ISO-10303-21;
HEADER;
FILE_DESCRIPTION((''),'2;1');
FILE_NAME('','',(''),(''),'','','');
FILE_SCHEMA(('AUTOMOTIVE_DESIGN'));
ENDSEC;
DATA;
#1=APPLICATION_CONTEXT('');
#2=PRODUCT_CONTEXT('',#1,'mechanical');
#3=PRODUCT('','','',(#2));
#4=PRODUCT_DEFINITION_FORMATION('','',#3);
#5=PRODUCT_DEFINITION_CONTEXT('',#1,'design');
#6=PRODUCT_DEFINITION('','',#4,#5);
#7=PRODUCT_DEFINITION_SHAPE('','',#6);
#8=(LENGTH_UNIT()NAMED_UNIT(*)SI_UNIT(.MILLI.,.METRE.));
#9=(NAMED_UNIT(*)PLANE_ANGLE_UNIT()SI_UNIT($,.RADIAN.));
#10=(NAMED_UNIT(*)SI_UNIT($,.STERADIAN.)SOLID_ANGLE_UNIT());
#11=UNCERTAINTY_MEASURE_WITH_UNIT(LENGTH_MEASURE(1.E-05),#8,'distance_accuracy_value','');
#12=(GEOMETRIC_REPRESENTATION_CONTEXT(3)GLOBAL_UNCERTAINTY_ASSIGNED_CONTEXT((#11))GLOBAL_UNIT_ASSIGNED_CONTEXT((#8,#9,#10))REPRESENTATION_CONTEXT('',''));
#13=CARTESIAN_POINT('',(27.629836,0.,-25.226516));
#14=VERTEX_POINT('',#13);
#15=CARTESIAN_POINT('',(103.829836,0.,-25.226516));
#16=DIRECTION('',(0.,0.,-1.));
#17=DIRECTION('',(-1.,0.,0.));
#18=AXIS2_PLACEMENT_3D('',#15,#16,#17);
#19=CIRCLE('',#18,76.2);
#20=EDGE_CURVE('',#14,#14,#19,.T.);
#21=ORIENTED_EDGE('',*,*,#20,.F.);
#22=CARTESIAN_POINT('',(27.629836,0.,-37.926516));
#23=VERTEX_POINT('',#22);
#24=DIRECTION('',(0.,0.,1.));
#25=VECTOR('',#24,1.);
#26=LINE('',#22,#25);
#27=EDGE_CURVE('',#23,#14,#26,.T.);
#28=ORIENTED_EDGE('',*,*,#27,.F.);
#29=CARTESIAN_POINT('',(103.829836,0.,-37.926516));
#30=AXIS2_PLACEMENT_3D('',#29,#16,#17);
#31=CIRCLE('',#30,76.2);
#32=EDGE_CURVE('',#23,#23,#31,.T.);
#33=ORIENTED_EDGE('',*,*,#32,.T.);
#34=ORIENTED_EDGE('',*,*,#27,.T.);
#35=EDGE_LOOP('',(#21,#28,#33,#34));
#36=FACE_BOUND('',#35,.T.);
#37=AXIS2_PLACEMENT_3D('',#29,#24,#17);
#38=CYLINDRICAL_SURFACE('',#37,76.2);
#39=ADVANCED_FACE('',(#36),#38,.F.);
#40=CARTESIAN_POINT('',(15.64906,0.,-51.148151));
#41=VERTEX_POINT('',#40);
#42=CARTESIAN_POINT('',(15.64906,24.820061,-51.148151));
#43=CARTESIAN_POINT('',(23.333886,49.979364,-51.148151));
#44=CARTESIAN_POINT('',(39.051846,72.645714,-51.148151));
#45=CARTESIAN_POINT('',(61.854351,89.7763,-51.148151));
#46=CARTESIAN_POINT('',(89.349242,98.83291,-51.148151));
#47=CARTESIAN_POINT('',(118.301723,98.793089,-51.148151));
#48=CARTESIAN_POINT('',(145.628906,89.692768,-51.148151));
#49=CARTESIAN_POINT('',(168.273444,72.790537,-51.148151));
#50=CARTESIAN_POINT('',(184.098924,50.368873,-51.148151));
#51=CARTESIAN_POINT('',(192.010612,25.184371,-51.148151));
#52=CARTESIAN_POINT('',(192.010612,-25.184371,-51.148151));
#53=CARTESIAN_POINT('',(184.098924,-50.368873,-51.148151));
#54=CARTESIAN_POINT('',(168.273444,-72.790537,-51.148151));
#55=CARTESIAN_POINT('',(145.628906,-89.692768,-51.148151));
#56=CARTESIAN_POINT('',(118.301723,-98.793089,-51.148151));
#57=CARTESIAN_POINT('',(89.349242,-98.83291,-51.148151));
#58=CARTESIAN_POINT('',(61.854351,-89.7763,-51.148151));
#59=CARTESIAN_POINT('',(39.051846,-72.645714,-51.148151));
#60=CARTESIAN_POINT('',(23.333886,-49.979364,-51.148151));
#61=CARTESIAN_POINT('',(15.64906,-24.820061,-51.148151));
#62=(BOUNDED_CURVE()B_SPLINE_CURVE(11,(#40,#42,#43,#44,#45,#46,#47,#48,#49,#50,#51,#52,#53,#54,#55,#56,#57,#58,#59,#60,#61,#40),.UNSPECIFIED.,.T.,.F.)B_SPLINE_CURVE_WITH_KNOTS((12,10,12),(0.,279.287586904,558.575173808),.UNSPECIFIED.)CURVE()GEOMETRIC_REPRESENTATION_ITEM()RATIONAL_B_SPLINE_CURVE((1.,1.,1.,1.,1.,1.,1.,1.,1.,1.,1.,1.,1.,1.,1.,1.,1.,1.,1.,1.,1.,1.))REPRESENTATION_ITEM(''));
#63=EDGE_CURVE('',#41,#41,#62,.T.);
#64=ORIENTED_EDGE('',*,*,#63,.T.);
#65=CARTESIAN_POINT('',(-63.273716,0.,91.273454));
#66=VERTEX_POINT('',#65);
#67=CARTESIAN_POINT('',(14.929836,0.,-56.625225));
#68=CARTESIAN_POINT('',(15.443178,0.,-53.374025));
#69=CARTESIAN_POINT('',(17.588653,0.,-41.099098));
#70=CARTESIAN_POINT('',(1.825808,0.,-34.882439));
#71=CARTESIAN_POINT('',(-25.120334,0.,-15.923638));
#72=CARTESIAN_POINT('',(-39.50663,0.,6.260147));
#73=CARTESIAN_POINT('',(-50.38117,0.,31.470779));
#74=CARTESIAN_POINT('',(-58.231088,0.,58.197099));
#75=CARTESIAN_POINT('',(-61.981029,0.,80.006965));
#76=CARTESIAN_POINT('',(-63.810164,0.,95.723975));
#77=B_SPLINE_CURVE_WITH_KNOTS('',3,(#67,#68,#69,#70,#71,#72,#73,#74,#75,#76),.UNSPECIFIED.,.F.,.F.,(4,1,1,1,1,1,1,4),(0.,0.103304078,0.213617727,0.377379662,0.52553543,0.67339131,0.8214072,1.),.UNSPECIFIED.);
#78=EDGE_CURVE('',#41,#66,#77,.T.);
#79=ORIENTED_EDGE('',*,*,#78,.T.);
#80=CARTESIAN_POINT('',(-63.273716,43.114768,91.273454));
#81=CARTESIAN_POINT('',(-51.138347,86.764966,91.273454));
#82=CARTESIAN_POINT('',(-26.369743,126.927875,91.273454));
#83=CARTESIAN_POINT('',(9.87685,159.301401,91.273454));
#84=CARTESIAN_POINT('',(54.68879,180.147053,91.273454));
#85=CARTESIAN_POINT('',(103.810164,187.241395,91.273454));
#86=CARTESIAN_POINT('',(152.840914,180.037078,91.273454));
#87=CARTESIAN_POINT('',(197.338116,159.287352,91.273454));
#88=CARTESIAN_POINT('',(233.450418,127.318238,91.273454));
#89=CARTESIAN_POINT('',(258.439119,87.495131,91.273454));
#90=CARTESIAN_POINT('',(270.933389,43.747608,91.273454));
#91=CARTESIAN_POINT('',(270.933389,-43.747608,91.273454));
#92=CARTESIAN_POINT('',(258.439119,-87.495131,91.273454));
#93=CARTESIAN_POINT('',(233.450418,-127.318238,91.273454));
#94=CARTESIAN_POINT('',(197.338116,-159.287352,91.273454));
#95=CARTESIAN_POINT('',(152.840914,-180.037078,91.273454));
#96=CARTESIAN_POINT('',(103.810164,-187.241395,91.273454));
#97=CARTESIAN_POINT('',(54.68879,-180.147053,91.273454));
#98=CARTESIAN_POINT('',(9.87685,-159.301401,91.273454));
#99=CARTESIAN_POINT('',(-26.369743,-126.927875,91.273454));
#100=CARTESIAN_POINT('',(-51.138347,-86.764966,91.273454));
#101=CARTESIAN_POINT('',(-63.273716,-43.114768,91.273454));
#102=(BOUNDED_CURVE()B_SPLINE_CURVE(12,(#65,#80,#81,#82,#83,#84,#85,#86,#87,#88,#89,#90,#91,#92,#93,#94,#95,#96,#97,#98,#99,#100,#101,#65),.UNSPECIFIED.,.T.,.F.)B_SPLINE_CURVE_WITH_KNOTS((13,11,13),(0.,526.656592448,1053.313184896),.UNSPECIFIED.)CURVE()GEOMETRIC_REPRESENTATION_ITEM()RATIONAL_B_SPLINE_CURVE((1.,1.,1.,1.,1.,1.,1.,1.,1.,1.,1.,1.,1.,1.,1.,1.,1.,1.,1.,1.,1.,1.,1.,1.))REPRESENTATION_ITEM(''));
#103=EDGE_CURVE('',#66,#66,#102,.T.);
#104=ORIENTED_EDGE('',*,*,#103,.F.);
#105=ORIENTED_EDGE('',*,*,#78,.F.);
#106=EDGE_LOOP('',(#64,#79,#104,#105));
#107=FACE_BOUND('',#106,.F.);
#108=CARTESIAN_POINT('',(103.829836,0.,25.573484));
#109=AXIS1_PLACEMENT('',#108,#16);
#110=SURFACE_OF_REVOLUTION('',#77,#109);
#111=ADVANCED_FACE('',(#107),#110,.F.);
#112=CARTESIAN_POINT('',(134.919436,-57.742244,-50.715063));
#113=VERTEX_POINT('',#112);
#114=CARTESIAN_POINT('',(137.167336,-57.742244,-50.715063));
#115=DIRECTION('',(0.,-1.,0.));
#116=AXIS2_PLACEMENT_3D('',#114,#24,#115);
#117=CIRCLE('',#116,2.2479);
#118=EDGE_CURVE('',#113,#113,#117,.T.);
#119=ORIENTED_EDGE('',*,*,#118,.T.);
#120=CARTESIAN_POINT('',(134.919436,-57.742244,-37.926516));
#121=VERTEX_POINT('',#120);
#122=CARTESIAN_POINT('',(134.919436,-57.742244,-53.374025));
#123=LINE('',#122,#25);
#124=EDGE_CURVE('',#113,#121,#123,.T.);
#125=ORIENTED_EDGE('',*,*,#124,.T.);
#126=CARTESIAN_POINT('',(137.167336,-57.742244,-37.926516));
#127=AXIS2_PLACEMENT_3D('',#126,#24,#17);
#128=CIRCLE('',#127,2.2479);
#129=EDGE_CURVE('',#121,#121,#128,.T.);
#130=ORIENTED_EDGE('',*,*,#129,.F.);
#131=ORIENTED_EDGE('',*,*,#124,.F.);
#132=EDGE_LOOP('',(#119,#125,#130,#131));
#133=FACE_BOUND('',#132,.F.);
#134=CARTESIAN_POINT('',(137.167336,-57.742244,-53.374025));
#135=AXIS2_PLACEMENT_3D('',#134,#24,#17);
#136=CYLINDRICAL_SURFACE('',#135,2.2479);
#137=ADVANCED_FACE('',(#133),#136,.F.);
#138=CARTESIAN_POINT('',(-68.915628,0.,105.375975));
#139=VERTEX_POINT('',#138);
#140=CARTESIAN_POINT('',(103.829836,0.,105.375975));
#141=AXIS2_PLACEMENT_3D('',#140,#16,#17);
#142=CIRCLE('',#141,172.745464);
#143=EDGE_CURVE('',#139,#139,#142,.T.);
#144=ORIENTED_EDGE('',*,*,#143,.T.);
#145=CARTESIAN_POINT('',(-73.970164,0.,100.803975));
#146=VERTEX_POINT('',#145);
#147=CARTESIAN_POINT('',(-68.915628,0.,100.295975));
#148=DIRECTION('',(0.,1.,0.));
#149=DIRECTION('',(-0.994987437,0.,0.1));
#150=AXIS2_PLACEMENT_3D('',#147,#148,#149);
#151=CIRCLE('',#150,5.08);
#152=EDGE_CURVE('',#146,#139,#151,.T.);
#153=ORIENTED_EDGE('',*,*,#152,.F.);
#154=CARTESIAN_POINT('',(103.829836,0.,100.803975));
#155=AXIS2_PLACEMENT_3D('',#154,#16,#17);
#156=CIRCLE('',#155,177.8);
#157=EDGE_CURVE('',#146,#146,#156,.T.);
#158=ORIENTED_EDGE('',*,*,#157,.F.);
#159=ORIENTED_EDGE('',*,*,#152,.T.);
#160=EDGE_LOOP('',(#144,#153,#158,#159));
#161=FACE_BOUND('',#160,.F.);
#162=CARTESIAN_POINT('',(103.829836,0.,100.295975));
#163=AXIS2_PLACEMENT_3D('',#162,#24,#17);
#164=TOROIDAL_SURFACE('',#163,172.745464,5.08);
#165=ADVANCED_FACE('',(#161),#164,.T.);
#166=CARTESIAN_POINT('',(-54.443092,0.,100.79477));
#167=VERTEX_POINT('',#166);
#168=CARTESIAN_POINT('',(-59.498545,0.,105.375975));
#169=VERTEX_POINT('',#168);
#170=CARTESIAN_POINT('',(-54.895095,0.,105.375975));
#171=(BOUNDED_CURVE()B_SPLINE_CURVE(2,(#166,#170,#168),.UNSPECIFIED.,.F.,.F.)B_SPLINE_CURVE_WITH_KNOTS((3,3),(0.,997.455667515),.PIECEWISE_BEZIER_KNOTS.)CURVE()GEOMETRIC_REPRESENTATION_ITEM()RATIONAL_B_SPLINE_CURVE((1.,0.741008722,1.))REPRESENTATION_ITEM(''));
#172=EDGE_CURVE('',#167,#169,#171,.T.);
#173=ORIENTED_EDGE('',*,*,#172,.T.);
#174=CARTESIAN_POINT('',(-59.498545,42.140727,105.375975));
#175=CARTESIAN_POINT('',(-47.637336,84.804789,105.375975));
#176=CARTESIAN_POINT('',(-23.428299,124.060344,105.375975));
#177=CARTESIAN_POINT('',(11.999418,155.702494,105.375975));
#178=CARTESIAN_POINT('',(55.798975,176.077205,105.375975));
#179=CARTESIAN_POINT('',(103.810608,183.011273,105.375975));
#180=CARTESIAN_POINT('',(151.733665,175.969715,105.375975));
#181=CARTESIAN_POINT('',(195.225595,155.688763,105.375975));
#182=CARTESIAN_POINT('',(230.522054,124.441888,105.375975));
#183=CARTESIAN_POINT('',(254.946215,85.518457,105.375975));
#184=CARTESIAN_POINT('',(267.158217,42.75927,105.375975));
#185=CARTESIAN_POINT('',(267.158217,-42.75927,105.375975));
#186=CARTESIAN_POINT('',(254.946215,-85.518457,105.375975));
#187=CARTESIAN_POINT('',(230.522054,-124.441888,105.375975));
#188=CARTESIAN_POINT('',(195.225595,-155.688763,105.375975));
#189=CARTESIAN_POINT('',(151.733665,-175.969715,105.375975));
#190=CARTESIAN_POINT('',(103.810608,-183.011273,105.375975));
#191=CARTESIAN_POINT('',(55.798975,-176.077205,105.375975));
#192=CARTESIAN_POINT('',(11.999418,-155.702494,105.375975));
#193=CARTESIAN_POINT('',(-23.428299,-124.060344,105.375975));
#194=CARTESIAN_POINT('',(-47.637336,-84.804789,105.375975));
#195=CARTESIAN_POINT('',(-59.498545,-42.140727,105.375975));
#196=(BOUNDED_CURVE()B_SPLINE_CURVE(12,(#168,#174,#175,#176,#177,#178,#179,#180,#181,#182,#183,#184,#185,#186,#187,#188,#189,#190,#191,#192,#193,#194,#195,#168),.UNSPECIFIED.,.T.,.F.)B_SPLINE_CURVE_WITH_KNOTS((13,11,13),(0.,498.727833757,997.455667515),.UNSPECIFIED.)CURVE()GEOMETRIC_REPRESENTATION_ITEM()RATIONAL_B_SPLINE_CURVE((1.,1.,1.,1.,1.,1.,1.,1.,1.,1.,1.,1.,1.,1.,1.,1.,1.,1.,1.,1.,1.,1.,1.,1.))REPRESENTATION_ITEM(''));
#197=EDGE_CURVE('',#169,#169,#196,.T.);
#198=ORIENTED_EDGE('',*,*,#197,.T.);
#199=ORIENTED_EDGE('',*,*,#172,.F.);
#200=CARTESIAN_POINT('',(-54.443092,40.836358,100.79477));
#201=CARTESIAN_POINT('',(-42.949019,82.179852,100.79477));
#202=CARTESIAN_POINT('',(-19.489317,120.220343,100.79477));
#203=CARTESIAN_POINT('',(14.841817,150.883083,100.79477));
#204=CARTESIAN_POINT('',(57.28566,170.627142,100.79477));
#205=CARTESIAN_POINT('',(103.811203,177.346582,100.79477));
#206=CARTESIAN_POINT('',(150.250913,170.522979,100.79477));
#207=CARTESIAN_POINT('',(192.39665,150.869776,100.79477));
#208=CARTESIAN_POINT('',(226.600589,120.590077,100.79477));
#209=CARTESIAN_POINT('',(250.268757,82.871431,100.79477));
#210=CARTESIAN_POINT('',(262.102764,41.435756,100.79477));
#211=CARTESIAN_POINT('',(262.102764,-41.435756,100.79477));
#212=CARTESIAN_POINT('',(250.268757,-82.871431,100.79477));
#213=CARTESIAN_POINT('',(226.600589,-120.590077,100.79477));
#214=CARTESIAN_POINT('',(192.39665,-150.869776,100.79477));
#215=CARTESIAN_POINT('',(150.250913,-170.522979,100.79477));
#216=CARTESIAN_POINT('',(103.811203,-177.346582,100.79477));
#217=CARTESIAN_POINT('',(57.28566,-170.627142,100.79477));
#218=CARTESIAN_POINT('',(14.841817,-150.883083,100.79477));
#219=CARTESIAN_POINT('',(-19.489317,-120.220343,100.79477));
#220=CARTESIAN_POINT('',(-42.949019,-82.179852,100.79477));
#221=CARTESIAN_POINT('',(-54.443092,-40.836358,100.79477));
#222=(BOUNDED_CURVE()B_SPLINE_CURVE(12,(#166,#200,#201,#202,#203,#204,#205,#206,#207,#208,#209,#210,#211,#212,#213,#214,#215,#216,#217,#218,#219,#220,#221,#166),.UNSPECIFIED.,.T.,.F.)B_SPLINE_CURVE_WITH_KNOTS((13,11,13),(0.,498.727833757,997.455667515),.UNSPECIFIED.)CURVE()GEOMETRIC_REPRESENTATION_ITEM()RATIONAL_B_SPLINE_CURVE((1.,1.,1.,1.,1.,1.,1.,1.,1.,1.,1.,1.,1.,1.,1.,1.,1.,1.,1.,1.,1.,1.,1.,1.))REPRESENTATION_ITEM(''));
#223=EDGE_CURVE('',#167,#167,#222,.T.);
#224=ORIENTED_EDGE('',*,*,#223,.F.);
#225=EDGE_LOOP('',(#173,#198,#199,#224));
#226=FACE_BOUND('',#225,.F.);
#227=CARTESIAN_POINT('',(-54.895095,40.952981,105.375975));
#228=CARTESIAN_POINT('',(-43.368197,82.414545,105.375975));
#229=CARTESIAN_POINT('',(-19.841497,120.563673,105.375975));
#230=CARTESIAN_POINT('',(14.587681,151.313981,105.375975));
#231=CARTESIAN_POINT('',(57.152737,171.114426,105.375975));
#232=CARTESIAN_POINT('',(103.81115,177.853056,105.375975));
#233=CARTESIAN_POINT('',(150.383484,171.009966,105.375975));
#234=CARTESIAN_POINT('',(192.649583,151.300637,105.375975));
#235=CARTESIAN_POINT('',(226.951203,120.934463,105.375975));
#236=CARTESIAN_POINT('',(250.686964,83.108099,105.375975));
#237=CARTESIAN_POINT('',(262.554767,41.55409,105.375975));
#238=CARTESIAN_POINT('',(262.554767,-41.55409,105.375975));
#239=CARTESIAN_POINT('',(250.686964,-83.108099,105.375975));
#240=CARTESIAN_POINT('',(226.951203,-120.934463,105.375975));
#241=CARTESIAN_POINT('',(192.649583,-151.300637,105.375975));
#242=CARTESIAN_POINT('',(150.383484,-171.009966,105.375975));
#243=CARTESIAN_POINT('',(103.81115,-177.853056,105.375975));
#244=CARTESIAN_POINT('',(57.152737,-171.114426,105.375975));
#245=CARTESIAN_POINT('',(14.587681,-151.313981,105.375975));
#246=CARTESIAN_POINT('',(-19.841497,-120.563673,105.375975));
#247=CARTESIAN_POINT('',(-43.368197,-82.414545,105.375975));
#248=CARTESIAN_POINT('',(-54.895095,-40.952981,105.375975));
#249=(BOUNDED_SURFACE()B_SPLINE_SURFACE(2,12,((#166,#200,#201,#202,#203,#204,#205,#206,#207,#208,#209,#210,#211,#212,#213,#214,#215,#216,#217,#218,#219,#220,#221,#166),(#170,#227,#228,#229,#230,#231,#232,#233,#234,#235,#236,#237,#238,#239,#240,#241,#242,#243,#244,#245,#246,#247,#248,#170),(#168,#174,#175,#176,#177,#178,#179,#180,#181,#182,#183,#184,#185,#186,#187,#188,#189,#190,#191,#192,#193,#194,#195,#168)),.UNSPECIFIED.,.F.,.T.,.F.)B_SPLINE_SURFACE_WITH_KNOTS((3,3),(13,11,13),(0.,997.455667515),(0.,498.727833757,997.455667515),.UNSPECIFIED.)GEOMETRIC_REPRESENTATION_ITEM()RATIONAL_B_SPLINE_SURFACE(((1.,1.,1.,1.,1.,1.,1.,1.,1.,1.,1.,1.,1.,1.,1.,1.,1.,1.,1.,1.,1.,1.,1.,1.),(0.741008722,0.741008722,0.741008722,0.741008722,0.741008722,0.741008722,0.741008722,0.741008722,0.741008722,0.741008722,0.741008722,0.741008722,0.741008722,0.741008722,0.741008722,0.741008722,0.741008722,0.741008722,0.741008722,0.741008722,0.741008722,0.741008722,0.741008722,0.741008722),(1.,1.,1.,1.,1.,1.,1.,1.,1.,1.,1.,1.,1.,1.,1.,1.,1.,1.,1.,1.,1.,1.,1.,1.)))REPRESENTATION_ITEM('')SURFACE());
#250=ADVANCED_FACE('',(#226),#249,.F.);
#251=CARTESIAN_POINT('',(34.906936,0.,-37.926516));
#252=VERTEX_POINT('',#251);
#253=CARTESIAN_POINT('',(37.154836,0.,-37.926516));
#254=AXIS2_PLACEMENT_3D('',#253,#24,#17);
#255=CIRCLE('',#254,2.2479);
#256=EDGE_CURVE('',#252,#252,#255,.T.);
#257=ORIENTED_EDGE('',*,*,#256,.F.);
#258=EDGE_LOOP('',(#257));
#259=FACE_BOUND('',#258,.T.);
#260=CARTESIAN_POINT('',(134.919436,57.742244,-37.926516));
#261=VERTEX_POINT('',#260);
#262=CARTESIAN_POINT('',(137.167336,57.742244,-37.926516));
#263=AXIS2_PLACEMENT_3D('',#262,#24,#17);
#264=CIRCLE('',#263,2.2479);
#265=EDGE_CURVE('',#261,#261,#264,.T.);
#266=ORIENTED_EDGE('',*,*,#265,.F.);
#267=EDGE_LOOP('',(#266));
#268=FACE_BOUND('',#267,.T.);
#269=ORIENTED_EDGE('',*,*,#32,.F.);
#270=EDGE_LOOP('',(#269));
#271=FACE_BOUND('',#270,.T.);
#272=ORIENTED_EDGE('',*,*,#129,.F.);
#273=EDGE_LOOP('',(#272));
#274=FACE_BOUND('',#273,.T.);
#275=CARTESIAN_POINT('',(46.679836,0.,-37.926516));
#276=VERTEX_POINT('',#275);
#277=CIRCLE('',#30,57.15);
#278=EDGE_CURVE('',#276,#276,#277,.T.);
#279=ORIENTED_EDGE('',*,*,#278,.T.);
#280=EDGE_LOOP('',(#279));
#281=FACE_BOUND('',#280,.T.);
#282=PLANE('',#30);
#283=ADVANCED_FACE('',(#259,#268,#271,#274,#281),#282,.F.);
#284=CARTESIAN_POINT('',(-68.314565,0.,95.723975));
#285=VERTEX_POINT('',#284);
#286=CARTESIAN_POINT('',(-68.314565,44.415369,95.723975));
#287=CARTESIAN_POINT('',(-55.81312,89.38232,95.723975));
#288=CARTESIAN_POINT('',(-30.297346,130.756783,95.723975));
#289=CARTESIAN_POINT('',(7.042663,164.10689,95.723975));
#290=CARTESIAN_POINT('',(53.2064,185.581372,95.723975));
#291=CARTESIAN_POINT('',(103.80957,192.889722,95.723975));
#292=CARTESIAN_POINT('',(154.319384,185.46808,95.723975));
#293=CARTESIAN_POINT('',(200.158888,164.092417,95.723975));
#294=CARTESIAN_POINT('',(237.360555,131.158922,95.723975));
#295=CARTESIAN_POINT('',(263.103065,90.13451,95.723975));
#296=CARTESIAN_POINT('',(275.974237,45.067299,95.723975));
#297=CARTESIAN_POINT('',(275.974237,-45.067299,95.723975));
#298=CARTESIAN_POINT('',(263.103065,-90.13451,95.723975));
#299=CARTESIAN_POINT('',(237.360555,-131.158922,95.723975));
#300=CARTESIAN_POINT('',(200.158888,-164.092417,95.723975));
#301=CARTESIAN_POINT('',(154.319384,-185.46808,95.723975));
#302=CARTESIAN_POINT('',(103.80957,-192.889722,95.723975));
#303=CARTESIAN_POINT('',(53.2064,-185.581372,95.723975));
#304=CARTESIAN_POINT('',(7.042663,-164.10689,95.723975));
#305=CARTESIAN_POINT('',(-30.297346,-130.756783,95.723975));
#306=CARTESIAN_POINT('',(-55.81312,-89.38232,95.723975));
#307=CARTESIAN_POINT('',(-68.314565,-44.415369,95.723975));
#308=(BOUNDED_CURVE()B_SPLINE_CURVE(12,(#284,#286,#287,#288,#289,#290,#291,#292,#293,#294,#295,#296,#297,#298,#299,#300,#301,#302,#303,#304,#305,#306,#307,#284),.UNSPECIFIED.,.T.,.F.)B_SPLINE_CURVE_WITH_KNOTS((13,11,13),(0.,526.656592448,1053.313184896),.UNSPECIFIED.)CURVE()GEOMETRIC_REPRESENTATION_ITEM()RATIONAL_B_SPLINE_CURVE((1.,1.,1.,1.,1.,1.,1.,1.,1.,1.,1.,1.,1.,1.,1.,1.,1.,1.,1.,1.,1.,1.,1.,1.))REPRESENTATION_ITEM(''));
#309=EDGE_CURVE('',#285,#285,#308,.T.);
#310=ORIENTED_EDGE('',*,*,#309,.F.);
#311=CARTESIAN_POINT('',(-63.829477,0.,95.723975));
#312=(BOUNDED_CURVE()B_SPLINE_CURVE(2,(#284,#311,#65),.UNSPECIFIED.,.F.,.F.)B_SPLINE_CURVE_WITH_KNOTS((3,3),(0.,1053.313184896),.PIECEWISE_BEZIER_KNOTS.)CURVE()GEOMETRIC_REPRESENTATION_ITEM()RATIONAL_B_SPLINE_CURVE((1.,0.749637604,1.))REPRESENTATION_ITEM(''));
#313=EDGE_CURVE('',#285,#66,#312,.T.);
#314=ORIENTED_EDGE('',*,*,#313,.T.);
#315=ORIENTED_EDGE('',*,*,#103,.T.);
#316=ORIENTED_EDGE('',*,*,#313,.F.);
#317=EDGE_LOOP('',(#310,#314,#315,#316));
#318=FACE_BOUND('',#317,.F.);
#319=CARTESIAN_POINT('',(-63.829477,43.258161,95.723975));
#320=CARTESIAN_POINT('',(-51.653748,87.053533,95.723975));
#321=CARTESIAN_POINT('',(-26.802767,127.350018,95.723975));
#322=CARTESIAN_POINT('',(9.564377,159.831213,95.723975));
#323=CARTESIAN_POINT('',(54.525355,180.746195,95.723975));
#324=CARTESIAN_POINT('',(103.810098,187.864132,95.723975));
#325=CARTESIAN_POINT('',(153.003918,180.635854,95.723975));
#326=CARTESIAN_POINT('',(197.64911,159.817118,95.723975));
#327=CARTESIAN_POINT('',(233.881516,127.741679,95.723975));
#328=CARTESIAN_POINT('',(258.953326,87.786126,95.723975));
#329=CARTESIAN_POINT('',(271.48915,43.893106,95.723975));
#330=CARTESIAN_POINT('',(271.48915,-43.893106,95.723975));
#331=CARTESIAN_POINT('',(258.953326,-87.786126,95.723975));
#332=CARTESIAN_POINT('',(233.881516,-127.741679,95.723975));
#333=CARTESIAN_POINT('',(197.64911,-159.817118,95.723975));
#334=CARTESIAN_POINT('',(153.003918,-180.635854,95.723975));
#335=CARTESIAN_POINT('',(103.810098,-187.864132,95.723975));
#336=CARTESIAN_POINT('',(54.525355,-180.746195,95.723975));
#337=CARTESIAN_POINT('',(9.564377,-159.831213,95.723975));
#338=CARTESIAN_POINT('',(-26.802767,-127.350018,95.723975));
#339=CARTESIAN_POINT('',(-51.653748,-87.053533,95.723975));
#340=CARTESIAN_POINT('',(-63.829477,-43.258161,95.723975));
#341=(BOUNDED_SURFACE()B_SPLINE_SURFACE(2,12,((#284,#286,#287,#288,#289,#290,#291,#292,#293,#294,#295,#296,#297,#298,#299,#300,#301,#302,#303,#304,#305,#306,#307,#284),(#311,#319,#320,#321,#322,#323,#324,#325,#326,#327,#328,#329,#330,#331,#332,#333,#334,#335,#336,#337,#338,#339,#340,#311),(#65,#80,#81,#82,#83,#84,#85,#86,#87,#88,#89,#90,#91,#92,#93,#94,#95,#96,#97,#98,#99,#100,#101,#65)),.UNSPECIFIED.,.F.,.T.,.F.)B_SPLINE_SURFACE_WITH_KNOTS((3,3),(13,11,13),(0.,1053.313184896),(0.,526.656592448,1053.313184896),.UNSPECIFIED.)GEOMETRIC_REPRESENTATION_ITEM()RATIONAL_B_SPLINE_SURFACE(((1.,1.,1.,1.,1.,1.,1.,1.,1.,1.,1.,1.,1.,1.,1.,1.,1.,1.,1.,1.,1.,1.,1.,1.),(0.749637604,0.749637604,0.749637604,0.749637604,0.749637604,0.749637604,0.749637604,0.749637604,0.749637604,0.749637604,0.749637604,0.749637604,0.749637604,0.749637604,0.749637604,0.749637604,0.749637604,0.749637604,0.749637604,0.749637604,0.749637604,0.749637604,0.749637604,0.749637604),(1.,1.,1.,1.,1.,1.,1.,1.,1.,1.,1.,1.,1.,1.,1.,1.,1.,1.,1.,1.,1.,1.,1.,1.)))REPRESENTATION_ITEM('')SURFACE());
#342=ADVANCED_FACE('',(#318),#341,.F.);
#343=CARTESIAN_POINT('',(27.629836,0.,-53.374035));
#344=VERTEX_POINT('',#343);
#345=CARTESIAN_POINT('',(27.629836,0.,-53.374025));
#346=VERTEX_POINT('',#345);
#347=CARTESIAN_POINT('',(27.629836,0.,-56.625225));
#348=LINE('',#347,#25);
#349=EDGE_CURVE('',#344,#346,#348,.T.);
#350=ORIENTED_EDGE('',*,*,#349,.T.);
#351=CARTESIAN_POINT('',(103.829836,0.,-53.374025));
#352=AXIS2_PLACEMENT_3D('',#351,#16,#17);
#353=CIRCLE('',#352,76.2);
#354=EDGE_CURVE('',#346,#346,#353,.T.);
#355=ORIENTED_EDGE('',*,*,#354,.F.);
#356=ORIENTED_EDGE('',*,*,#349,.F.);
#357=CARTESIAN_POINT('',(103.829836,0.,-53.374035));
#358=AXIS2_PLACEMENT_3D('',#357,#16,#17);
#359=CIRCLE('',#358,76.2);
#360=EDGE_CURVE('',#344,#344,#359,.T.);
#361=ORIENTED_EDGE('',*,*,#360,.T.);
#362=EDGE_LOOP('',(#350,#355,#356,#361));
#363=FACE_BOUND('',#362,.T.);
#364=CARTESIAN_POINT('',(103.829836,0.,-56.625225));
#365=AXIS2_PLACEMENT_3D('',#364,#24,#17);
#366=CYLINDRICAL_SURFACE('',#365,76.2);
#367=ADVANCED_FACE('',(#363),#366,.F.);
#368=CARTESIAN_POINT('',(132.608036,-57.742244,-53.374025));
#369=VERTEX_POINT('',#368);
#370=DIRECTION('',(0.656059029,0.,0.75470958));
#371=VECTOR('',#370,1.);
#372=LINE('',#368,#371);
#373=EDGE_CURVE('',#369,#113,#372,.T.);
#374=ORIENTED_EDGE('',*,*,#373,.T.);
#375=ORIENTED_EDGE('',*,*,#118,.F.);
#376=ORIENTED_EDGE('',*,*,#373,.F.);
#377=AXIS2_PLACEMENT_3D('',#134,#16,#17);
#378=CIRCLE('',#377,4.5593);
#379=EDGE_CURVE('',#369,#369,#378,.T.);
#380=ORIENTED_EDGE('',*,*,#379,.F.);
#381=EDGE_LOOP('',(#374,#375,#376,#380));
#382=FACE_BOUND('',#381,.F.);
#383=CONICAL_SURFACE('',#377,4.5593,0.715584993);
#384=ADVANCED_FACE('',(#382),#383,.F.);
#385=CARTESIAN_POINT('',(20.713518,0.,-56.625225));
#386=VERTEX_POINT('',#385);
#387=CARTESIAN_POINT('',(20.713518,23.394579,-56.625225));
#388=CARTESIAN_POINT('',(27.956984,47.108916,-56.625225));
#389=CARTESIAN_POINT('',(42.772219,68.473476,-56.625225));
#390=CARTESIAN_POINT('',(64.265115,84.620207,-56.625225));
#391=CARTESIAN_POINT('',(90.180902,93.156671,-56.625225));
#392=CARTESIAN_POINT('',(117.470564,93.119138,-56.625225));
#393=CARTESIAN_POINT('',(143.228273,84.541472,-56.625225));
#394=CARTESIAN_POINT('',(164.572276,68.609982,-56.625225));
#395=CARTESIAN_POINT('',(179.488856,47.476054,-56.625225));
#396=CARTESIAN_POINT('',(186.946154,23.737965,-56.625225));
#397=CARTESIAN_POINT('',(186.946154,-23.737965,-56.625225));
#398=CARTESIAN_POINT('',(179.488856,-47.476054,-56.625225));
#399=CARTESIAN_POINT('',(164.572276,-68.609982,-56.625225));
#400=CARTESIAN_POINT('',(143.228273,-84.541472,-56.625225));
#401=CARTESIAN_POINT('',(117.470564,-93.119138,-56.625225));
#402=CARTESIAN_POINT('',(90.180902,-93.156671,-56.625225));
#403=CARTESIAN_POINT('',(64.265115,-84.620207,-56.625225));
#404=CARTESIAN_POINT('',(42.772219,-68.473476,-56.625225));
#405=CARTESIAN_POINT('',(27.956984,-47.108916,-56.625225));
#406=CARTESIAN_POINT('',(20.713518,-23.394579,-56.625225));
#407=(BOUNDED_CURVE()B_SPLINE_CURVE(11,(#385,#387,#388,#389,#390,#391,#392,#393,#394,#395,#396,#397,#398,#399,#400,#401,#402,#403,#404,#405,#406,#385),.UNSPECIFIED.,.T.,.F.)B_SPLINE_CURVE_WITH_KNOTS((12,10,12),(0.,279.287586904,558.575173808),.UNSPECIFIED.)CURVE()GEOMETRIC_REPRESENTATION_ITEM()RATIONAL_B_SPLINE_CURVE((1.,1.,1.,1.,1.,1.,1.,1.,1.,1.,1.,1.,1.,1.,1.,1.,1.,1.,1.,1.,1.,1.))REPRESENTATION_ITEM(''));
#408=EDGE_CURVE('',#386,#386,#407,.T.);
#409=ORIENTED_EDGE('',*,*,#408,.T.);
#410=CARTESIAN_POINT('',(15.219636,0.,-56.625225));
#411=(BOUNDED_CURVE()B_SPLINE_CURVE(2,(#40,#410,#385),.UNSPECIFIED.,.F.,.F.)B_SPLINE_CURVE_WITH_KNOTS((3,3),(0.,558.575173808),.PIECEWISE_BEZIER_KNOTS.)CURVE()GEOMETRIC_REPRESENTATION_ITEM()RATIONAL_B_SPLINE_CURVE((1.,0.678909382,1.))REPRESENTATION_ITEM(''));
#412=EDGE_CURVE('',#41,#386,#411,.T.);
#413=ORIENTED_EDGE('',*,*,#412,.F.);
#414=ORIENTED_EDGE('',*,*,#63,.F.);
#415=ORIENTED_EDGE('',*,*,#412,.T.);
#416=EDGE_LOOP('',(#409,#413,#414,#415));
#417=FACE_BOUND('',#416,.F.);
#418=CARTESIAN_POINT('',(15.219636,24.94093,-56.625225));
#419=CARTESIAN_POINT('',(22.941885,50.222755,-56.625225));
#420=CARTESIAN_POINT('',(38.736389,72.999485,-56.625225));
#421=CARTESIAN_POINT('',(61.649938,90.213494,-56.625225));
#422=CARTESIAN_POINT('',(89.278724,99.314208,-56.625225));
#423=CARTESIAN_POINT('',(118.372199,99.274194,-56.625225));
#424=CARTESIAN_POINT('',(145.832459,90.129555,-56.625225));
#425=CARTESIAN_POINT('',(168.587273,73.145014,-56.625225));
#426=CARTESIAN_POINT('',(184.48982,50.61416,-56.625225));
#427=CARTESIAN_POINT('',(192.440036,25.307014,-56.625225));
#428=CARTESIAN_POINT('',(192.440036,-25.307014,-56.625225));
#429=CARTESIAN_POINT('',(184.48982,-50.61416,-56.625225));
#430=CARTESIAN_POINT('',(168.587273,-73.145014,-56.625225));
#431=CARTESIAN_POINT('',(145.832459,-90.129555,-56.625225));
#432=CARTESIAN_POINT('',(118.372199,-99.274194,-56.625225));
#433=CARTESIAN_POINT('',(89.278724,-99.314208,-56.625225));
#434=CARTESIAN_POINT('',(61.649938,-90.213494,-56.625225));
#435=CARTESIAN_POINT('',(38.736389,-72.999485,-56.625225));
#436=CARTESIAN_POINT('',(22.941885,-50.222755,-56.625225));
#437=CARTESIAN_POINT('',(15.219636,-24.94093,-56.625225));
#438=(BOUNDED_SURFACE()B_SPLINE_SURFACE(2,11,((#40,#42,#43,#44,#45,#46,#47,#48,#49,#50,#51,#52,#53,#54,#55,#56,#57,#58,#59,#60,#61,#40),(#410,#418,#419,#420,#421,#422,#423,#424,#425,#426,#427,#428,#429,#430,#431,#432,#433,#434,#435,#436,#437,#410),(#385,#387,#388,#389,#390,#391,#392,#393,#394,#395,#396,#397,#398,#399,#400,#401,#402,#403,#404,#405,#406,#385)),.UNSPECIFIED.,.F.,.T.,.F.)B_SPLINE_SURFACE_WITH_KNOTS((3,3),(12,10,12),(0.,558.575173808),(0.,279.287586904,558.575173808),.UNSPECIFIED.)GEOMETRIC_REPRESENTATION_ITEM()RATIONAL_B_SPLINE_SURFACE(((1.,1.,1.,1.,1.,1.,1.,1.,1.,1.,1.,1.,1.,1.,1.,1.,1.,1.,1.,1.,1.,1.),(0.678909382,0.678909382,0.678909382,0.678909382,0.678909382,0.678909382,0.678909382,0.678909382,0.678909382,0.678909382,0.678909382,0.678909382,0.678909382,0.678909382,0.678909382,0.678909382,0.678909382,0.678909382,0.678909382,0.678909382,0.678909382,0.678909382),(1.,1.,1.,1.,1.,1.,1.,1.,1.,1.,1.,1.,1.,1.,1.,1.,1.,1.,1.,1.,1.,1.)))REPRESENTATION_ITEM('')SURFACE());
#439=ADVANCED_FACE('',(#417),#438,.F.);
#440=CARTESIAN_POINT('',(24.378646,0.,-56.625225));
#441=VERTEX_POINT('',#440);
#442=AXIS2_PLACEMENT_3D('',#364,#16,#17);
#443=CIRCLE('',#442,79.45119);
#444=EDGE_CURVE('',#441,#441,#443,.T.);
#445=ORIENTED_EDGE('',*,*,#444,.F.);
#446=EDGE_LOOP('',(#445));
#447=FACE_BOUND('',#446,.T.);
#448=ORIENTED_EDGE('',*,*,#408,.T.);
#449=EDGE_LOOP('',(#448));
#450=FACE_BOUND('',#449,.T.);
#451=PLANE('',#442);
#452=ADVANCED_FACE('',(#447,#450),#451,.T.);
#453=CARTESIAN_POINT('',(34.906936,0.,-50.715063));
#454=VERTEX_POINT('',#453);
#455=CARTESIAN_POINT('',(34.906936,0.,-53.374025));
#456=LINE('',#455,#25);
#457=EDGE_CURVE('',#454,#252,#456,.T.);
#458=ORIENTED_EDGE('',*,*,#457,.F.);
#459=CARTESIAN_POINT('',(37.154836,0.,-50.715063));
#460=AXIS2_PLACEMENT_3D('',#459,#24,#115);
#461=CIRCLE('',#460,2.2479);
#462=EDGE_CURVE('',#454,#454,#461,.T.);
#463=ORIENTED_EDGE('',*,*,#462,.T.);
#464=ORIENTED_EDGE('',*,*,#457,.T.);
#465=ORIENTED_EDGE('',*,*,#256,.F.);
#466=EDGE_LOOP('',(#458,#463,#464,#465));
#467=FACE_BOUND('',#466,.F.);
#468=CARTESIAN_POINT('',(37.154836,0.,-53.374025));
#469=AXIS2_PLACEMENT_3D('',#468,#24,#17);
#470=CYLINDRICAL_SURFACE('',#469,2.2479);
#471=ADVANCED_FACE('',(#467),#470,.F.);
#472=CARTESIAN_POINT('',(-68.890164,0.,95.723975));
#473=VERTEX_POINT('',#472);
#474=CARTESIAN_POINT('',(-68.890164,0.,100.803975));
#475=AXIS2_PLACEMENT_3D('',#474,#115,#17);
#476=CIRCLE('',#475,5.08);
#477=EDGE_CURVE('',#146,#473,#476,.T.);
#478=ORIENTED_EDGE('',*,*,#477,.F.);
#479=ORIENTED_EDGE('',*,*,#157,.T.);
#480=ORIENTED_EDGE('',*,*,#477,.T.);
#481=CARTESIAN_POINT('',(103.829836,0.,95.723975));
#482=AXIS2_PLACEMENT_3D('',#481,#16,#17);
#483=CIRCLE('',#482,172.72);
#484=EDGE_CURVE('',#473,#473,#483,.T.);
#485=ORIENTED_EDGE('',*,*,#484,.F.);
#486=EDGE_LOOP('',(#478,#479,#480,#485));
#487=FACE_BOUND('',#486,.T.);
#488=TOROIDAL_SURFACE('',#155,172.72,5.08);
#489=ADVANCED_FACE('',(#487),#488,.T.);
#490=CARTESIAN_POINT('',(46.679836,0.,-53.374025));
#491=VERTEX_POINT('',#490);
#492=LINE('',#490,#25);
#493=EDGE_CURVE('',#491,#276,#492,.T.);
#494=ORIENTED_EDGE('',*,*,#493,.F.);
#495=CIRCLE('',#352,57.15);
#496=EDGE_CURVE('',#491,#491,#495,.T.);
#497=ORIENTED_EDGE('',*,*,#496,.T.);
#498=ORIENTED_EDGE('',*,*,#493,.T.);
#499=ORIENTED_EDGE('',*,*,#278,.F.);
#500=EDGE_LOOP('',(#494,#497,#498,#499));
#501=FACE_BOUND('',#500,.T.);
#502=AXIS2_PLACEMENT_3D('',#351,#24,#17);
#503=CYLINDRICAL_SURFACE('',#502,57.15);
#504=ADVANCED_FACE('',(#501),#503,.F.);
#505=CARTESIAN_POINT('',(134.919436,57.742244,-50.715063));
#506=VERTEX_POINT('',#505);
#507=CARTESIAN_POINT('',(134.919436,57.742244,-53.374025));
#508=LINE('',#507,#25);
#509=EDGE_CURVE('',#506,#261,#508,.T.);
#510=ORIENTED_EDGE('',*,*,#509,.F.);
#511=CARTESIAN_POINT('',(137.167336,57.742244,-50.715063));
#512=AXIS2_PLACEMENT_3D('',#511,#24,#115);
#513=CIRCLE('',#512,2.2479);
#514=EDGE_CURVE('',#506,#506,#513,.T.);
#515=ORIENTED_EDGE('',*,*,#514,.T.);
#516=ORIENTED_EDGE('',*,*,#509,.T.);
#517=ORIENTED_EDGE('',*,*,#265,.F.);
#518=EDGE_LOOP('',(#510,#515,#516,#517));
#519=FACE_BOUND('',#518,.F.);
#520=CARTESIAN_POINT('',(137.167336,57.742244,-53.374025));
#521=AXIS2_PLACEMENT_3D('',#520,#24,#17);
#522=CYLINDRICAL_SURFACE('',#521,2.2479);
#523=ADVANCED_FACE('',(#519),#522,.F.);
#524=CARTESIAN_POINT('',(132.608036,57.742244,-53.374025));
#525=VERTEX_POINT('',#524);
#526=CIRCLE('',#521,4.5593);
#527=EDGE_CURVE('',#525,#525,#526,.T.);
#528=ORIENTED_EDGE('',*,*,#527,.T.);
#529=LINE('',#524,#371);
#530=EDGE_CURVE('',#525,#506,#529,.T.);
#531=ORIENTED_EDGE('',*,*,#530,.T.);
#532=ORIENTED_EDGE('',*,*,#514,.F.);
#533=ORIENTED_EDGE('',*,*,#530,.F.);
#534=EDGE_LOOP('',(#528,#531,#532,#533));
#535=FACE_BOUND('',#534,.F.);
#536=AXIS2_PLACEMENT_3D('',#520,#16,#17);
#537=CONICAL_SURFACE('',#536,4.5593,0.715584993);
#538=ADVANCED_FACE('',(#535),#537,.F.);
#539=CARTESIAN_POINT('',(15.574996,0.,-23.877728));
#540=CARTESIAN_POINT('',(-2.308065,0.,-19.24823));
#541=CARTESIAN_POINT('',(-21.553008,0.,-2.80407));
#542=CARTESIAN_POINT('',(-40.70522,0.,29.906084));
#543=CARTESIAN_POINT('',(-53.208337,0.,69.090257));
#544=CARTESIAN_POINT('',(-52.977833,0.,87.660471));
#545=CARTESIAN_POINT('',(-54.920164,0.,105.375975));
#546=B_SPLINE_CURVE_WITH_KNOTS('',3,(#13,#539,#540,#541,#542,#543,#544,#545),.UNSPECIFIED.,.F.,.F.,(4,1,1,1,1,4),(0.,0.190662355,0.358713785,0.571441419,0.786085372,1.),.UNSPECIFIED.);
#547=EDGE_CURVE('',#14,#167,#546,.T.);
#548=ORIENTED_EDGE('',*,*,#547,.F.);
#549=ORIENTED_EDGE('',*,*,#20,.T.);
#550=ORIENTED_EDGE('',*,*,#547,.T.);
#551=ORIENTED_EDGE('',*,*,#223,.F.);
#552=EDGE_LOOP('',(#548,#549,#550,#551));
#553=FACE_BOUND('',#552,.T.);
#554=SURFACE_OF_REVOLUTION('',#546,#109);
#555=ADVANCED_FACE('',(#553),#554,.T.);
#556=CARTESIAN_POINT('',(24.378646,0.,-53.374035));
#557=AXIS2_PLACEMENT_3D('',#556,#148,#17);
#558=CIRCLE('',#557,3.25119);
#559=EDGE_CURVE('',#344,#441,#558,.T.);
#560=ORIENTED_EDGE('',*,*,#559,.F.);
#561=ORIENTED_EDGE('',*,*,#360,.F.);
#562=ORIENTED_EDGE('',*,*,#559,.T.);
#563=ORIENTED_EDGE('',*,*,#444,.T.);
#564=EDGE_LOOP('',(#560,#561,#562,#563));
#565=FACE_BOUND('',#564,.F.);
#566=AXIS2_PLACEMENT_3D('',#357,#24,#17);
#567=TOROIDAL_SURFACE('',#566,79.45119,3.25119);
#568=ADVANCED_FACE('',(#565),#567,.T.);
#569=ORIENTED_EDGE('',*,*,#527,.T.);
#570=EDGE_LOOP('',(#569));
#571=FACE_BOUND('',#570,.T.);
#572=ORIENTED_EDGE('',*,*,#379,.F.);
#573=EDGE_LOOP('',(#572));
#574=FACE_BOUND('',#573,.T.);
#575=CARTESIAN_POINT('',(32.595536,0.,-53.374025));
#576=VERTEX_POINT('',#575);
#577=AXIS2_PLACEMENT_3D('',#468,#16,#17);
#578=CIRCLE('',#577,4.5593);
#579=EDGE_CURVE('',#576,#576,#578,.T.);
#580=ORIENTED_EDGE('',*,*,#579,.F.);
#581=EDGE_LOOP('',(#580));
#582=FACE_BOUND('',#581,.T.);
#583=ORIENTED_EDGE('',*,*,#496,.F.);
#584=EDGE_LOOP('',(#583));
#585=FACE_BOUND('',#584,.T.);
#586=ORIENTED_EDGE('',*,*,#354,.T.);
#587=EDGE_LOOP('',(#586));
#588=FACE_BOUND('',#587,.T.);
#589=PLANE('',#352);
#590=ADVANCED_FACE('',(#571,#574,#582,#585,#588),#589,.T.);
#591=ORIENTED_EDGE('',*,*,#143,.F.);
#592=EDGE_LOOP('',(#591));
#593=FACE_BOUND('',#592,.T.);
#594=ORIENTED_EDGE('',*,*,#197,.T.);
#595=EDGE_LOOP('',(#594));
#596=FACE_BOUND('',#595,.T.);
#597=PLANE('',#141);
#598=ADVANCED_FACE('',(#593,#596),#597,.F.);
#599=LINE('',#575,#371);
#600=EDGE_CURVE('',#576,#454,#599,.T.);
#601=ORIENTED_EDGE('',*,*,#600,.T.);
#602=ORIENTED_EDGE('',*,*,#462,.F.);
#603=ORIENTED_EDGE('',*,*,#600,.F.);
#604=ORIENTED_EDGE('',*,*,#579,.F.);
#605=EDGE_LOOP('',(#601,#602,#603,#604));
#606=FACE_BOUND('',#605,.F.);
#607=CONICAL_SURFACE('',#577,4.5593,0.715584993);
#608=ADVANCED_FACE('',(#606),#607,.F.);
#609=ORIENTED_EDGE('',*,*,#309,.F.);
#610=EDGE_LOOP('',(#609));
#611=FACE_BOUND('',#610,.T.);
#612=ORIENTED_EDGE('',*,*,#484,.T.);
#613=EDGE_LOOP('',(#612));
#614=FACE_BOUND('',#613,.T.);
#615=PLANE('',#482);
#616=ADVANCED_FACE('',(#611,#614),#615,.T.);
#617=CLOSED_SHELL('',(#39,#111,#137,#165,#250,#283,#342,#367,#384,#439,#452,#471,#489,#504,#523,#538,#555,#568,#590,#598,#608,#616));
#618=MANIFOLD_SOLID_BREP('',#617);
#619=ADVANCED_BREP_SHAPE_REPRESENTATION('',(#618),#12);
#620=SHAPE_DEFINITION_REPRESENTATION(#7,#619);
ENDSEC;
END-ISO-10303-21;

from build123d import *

# Parameters (mm, degrees)
F2_R           = 5.08
F5_D           = 4.4958
F5_CSINK_D     = 9.1186
F5_CSINK_ANGLE = 82
F6_R           = 3.25119


# Not quite as in the source:
# - a fillet or chamfer that OpenCascade refuses, or shapes differently, is made with other operations: its cross-section is extruded or revolved along the edge and cut away or added
# - a fillet or chamfer is up to 0.001 mm smaller than in the source, because OpenCascade refuses the exact size


with BuildPart() as f1:
    # F0 (on Front) → F1 (revolve)
    with BuildSketch(Plane.XZ):
        with BuildLine():
            Line((27.6298361897, -53.374024616), (46.6798361897, -53.374024616))
            Line((46.6798361897, -53.374024616), (46.6798361897, -37.9265157998))
            Line((46.6798361897, -37.9265157998), (27.6298361897, -37.9265157998))
            Line((27.6298361897, -37.9265157998), (27.6298361897, -25.2265157998))
            add(Edge.make_bspline(
                [(27.6298361897, -25.2265157998), (15.5749955494, -23.8777277254), (-2.3080647277, -19.248229525), (-21.5530079978, -2.8040698611), (-40.7052200015, 29.9060837396), (-53.2083366158, 69.0902566771), (-52.9778326059, 87.6604708421), (-54.9201638103, 105.375975384)],
                knots=[0, 0, 0, 0, 0.1906623549, 0.3587137849, 0.5714414191, 0.7860853721, 1, 1, 1, 1], degree=3))
            Line((-54.9201638103, 105.375975384), (-73.9701638103, 105.375975384))
            Line((-73.9701638103, 105.375975384), (-73.9701638103, 95.723975384))
            Line((-73.9701638103, 95.723975384), (-63.8101638103, 95.723975384))
            add(Edge.make_bspline(
                [(14.9298361897, -56.625224616), (15.4431777214, -53.374024616), (17.5886526762, -41.0990979254), (1.8258084828, -34.8824386954), (-25.1203339264, -15.923637622), (-39.50662959, 6.260147279), (-50.3811697961, 31.4707791655), (-58.2310879585, 58.1970989972), (-61.9810285963, 80.006964744), (-63.8101638103, 95.723975384)],
                knots=[0, 0, 0, 0, 0.1033040781, 0.2136177267, 0.377379662, 0.5255354297, 0.6733913097, 0.8214071996, 1, 1, 1, 1], degree=3))
            Line((14.9298361897, -56.625224616), (27.6298361897, -56.625224616))
            Line((27.6298361897, -56.625224616), (27.6298361897, -53.374024616))
        make_face()
    revolve(axis=Axis((103.8298361897, 0, 25.5734842002), (0, 0, -1)))

    # F2
    f2_edges = [f1.edges().sort_by_distance(p)[0] for p in [
        (281.629836, 0, 95.723975),
        (262.579836, 0, 105.375975),
        (192.729836, 0, -56.625225),
        (271.469836, 0, 95.723975),
    ]]
    fillet(f2_edges, radius=F2_R)

    # F3: fillet of radius 5.08 on 1 edges, made by hand

    # F3_s1 → F3_t2 (revolve, cut)
    with BuildSketch(Plane.XZ):
        with BuildLine():
            ThreePointArc((-73.9701638103, 100.803975384), (-72.3233952275, 104.0634042154), (-68.9156276298, 105.375975384))
            Line((-68.9156276298, 105.375975384), (-73.9701638103, 105.375975384))
            Line((-73.9701638103, 105.375975384), (-73.9701638103, 100.803975384))
        make_face()
    revolve(axis=Axis((103.8298361897, 0, 105.375975384), (0, 0, -1)), mode=Mode.SUBTRACT)

    # F5 (through all)
    with Locations(Plane(origin=(0, 0, -53.374024616), x_dir=(1, 0, 0), z_dir=(0, 0, -1))):
        with Locations((103.8298361897, 0), (137.1673361897, 57.7422437973), (137.1673361897, -57.7422437973), (37.1548361897, 0)):
            CounterSinkHole(F5_D / 2, F5_CSINK_D / 2, counter_sink_angle=F5_CSINK_ANGLE)

    # F6 (radius 3.2512 in the source; OpenCascade refuses exactly that, so slightly less here)
    f6_edges = [f1.edges().sort_by_distance(p)[0] for p in [
        (180.029836, 0, -56.625225),
    ]]
    fillet(f6_edges, radius=F6_R)


solid = f1.part
